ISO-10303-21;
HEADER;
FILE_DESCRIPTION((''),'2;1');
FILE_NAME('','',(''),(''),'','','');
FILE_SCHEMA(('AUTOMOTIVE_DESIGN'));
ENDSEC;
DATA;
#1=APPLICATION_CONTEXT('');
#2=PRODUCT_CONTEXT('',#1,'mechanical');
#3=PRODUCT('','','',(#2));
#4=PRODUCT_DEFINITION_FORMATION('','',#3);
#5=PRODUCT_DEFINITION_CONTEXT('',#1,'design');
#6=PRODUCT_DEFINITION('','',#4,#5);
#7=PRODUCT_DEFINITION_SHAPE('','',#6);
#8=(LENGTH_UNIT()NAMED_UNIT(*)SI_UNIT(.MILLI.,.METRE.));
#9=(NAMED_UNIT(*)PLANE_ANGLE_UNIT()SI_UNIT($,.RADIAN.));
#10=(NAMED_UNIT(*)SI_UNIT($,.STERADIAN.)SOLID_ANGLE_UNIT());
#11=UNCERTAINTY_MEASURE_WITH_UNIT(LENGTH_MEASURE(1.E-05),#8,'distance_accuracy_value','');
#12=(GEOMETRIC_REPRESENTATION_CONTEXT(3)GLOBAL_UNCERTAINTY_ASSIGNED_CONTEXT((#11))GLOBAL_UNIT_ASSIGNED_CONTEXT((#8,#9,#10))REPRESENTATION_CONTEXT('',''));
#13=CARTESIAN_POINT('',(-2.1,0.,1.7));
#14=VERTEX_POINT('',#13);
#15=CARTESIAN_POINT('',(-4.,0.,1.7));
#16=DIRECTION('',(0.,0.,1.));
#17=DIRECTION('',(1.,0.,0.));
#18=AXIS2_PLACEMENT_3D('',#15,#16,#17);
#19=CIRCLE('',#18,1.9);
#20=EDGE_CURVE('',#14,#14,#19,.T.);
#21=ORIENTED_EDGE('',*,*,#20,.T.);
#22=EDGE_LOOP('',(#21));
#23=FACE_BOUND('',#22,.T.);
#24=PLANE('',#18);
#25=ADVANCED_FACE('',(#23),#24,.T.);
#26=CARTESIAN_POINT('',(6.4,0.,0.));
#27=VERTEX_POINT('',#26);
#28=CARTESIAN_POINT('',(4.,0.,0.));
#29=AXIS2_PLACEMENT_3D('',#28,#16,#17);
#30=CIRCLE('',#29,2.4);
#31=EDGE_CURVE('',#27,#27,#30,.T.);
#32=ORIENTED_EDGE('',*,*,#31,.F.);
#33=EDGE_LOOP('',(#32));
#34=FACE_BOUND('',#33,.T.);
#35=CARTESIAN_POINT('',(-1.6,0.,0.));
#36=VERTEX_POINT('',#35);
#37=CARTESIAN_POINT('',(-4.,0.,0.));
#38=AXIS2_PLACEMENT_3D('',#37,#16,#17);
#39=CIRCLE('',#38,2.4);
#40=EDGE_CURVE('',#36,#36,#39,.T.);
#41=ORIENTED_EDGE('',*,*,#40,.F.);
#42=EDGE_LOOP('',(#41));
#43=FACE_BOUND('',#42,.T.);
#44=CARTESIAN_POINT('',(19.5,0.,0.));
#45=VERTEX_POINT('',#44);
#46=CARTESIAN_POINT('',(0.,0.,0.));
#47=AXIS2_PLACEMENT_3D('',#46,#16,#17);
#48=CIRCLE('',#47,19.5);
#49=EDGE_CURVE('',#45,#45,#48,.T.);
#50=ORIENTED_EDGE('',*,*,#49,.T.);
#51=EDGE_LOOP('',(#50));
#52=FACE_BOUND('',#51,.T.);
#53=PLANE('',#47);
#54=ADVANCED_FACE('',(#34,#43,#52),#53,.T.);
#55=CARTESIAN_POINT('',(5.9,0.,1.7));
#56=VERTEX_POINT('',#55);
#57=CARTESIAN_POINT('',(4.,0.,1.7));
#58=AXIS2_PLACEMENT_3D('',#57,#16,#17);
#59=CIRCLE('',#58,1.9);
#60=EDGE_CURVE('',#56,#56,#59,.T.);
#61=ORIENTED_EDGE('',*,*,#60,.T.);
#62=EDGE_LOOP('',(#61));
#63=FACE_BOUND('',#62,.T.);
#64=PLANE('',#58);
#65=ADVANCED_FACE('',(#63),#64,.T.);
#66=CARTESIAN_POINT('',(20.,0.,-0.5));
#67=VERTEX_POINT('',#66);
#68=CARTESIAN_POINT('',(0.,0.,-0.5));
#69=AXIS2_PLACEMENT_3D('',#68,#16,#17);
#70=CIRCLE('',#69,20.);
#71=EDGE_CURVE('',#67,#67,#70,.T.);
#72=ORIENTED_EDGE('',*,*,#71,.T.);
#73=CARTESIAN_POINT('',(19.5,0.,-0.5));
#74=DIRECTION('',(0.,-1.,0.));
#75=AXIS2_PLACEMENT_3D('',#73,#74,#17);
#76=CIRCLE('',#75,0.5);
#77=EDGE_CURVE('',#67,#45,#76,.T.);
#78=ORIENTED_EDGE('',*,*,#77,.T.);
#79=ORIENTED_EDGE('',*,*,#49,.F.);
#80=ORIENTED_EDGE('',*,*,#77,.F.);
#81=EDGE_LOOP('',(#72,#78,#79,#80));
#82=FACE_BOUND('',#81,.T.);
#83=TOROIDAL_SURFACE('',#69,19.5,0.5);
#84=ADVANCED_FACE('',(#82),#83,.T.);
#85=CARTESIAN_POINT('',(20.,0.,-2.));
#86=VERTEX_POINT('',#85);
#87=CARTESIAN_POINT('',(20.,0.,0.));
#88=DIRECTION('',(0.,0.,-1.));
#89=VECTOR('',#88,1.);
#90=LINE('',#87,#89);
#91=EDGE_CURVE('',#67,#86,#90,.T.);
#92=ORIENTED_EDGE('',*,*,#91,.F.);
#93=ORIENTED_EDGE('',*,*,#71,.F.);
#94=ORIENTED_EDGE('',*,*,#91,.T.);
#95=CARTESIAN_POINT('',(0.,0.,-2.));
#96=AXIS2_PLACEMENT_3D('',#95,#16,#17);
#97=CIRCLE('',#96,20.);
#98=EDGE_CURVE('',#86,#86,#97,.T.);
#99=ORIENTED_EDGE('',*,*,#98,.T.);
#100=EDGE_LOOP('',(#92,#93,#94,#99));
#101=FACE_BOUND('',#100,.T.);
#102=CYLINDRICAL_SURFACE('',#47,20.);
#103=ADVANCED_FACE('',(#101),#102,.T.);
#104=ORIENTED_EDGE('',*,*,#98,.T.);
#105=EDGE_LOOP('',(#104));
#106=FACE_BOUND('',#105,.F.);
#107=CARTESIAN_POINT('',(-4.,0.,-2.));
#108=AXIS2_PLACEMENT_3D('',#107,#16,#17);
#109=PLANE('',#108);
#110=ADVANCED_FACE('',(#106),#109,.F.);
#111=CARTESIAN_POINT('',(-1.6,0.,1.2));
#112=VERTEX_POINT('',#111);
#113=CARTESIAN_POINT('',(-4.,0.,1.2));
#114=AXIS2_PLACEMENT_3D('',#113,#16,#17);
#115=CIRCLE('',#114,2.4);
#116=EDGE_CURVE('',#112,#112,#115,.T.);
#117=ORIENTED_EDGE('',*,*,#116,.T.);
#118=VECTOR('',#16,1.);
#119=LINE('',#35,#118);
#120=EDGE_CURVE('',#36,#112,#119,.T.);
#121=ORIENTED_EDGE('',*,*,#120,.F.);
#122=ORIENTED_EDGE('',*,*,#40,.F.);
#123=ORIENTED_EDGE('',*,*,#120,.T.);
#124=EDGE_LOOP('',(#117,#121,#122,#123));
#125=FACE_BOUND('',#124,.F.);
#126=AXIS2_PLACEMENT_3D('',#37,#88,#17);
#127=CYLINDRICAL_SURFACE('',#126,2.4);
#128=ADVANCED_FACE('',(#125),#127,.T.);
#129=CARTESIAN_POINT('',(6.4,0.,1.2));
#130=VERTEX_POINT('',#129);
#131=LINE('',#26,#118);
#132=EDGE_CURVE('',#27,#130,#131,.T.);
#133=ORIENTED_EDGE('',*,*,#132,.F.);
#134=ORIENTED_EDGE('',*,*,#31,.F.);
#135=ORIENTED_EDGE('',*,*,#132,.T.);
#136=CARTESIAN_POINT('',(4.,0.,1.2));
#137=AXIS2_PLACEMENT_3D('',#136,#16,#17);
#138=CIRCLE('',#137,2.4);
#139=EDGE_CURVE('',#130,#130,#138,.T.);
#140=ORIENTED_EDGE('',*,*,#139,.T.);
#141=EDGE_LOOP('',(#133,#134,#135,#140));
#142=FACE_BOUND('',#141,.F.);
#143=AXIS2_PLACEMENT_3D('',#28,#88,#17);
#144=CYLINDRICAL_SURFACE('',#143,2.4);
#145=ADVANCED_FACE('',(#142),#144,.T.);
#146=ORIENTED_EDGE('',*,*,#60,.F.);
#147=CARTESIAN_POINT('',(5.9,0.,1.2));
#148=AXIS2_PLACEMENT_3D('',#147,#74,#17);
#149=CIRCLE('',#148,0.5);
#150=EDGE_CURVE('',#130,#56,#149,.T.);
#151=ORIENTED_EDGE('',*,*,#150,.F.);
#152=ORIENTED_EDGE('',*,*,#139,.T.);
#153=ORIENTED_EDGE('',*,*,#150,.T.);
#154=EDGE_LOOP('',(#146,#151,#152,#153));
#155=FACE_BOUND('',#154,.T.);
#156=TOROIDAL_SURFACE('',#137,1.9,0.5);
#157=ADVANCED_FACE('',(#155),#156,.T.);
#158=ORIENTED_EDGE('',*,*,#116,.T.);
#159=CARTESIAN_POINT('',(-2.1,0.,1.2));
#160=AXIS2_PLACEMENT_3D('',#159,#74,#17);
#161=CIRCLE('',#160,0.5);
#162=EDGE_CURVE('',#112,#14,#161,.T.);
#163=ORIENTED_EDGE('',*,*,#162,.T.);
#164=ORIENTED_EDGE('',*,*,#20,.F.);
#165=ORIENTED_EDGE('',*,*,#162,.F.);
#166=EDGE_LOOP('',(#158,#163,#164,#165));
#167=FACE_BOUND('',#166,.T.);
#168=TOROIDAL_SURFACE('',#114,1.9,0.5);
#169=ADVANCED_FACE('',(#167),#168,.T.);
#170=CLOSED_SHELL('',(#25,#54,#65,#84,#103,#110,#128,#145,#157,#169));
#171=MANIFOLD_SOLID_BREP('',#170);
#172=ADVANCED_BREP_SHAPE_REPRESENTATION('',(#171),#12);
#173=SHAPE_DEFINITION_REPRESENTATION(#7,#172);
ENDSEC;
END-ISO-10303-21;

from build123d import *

# Parameters (mm, degrees)
F0_R     = 2.4
F1_DEPTH = 1.7
F0_R_2   = 20
F2_DEPTH = 2
F3_R     = 0.5
F4_DEPTH = 2


with BuildPart() as f1:
    # F0 (on Top) → F1 (new body)
    with BuildSketch(Plane.XY):
        with Locations((-4, 0)):
            Circle(F0_R)
    extrude(amount=F1_DEPTH)



with BuildPart() as f1b:
    # F0 (on Top) → F1, piece 2 (new body)
    with BuildSketch(Plane.XY):
        with Locations((4, 0)):
            Circle(F0_R)
    extrude(amount=F1_DEPTH)


with BuildPart() as f1_1:
    add(f1.part)

    add(f1b.part)  # F2 merges F1b
    # F0 (on Top) → F2 (join)
    with BuildSketch(Plane.XY):
        Circle(F0_R_2)
        with Locations((-4, 0)):
            Circle(F0_R, mode=Mode.SUBTRACT)
        with Locations((4, 0)):
            Circle(F0_R, mode=Mode.SUBTRACT)
    extrude(amount=-F2_DEPTH)

    # F3
    f3_edges = [f1_1.edges().sort_by_distance(p)[0] for p in [
        (-6.4, 0, 1.7),
        (1.6, 0, 1.7),
        (-20, 0, 0),
    ]]
    fillet(f3_edges, radius=F3_R)

    # F4 (add): faces of the model
    f4_faces = [f1_1.faces().sort_by_distance(p)[0] for p in [
        (-4, 0, 0),
        (4, 0, 0),
    ]]
    extrude(f4_faces, amount=F4_DEPTH)


solid = f1_1.part
